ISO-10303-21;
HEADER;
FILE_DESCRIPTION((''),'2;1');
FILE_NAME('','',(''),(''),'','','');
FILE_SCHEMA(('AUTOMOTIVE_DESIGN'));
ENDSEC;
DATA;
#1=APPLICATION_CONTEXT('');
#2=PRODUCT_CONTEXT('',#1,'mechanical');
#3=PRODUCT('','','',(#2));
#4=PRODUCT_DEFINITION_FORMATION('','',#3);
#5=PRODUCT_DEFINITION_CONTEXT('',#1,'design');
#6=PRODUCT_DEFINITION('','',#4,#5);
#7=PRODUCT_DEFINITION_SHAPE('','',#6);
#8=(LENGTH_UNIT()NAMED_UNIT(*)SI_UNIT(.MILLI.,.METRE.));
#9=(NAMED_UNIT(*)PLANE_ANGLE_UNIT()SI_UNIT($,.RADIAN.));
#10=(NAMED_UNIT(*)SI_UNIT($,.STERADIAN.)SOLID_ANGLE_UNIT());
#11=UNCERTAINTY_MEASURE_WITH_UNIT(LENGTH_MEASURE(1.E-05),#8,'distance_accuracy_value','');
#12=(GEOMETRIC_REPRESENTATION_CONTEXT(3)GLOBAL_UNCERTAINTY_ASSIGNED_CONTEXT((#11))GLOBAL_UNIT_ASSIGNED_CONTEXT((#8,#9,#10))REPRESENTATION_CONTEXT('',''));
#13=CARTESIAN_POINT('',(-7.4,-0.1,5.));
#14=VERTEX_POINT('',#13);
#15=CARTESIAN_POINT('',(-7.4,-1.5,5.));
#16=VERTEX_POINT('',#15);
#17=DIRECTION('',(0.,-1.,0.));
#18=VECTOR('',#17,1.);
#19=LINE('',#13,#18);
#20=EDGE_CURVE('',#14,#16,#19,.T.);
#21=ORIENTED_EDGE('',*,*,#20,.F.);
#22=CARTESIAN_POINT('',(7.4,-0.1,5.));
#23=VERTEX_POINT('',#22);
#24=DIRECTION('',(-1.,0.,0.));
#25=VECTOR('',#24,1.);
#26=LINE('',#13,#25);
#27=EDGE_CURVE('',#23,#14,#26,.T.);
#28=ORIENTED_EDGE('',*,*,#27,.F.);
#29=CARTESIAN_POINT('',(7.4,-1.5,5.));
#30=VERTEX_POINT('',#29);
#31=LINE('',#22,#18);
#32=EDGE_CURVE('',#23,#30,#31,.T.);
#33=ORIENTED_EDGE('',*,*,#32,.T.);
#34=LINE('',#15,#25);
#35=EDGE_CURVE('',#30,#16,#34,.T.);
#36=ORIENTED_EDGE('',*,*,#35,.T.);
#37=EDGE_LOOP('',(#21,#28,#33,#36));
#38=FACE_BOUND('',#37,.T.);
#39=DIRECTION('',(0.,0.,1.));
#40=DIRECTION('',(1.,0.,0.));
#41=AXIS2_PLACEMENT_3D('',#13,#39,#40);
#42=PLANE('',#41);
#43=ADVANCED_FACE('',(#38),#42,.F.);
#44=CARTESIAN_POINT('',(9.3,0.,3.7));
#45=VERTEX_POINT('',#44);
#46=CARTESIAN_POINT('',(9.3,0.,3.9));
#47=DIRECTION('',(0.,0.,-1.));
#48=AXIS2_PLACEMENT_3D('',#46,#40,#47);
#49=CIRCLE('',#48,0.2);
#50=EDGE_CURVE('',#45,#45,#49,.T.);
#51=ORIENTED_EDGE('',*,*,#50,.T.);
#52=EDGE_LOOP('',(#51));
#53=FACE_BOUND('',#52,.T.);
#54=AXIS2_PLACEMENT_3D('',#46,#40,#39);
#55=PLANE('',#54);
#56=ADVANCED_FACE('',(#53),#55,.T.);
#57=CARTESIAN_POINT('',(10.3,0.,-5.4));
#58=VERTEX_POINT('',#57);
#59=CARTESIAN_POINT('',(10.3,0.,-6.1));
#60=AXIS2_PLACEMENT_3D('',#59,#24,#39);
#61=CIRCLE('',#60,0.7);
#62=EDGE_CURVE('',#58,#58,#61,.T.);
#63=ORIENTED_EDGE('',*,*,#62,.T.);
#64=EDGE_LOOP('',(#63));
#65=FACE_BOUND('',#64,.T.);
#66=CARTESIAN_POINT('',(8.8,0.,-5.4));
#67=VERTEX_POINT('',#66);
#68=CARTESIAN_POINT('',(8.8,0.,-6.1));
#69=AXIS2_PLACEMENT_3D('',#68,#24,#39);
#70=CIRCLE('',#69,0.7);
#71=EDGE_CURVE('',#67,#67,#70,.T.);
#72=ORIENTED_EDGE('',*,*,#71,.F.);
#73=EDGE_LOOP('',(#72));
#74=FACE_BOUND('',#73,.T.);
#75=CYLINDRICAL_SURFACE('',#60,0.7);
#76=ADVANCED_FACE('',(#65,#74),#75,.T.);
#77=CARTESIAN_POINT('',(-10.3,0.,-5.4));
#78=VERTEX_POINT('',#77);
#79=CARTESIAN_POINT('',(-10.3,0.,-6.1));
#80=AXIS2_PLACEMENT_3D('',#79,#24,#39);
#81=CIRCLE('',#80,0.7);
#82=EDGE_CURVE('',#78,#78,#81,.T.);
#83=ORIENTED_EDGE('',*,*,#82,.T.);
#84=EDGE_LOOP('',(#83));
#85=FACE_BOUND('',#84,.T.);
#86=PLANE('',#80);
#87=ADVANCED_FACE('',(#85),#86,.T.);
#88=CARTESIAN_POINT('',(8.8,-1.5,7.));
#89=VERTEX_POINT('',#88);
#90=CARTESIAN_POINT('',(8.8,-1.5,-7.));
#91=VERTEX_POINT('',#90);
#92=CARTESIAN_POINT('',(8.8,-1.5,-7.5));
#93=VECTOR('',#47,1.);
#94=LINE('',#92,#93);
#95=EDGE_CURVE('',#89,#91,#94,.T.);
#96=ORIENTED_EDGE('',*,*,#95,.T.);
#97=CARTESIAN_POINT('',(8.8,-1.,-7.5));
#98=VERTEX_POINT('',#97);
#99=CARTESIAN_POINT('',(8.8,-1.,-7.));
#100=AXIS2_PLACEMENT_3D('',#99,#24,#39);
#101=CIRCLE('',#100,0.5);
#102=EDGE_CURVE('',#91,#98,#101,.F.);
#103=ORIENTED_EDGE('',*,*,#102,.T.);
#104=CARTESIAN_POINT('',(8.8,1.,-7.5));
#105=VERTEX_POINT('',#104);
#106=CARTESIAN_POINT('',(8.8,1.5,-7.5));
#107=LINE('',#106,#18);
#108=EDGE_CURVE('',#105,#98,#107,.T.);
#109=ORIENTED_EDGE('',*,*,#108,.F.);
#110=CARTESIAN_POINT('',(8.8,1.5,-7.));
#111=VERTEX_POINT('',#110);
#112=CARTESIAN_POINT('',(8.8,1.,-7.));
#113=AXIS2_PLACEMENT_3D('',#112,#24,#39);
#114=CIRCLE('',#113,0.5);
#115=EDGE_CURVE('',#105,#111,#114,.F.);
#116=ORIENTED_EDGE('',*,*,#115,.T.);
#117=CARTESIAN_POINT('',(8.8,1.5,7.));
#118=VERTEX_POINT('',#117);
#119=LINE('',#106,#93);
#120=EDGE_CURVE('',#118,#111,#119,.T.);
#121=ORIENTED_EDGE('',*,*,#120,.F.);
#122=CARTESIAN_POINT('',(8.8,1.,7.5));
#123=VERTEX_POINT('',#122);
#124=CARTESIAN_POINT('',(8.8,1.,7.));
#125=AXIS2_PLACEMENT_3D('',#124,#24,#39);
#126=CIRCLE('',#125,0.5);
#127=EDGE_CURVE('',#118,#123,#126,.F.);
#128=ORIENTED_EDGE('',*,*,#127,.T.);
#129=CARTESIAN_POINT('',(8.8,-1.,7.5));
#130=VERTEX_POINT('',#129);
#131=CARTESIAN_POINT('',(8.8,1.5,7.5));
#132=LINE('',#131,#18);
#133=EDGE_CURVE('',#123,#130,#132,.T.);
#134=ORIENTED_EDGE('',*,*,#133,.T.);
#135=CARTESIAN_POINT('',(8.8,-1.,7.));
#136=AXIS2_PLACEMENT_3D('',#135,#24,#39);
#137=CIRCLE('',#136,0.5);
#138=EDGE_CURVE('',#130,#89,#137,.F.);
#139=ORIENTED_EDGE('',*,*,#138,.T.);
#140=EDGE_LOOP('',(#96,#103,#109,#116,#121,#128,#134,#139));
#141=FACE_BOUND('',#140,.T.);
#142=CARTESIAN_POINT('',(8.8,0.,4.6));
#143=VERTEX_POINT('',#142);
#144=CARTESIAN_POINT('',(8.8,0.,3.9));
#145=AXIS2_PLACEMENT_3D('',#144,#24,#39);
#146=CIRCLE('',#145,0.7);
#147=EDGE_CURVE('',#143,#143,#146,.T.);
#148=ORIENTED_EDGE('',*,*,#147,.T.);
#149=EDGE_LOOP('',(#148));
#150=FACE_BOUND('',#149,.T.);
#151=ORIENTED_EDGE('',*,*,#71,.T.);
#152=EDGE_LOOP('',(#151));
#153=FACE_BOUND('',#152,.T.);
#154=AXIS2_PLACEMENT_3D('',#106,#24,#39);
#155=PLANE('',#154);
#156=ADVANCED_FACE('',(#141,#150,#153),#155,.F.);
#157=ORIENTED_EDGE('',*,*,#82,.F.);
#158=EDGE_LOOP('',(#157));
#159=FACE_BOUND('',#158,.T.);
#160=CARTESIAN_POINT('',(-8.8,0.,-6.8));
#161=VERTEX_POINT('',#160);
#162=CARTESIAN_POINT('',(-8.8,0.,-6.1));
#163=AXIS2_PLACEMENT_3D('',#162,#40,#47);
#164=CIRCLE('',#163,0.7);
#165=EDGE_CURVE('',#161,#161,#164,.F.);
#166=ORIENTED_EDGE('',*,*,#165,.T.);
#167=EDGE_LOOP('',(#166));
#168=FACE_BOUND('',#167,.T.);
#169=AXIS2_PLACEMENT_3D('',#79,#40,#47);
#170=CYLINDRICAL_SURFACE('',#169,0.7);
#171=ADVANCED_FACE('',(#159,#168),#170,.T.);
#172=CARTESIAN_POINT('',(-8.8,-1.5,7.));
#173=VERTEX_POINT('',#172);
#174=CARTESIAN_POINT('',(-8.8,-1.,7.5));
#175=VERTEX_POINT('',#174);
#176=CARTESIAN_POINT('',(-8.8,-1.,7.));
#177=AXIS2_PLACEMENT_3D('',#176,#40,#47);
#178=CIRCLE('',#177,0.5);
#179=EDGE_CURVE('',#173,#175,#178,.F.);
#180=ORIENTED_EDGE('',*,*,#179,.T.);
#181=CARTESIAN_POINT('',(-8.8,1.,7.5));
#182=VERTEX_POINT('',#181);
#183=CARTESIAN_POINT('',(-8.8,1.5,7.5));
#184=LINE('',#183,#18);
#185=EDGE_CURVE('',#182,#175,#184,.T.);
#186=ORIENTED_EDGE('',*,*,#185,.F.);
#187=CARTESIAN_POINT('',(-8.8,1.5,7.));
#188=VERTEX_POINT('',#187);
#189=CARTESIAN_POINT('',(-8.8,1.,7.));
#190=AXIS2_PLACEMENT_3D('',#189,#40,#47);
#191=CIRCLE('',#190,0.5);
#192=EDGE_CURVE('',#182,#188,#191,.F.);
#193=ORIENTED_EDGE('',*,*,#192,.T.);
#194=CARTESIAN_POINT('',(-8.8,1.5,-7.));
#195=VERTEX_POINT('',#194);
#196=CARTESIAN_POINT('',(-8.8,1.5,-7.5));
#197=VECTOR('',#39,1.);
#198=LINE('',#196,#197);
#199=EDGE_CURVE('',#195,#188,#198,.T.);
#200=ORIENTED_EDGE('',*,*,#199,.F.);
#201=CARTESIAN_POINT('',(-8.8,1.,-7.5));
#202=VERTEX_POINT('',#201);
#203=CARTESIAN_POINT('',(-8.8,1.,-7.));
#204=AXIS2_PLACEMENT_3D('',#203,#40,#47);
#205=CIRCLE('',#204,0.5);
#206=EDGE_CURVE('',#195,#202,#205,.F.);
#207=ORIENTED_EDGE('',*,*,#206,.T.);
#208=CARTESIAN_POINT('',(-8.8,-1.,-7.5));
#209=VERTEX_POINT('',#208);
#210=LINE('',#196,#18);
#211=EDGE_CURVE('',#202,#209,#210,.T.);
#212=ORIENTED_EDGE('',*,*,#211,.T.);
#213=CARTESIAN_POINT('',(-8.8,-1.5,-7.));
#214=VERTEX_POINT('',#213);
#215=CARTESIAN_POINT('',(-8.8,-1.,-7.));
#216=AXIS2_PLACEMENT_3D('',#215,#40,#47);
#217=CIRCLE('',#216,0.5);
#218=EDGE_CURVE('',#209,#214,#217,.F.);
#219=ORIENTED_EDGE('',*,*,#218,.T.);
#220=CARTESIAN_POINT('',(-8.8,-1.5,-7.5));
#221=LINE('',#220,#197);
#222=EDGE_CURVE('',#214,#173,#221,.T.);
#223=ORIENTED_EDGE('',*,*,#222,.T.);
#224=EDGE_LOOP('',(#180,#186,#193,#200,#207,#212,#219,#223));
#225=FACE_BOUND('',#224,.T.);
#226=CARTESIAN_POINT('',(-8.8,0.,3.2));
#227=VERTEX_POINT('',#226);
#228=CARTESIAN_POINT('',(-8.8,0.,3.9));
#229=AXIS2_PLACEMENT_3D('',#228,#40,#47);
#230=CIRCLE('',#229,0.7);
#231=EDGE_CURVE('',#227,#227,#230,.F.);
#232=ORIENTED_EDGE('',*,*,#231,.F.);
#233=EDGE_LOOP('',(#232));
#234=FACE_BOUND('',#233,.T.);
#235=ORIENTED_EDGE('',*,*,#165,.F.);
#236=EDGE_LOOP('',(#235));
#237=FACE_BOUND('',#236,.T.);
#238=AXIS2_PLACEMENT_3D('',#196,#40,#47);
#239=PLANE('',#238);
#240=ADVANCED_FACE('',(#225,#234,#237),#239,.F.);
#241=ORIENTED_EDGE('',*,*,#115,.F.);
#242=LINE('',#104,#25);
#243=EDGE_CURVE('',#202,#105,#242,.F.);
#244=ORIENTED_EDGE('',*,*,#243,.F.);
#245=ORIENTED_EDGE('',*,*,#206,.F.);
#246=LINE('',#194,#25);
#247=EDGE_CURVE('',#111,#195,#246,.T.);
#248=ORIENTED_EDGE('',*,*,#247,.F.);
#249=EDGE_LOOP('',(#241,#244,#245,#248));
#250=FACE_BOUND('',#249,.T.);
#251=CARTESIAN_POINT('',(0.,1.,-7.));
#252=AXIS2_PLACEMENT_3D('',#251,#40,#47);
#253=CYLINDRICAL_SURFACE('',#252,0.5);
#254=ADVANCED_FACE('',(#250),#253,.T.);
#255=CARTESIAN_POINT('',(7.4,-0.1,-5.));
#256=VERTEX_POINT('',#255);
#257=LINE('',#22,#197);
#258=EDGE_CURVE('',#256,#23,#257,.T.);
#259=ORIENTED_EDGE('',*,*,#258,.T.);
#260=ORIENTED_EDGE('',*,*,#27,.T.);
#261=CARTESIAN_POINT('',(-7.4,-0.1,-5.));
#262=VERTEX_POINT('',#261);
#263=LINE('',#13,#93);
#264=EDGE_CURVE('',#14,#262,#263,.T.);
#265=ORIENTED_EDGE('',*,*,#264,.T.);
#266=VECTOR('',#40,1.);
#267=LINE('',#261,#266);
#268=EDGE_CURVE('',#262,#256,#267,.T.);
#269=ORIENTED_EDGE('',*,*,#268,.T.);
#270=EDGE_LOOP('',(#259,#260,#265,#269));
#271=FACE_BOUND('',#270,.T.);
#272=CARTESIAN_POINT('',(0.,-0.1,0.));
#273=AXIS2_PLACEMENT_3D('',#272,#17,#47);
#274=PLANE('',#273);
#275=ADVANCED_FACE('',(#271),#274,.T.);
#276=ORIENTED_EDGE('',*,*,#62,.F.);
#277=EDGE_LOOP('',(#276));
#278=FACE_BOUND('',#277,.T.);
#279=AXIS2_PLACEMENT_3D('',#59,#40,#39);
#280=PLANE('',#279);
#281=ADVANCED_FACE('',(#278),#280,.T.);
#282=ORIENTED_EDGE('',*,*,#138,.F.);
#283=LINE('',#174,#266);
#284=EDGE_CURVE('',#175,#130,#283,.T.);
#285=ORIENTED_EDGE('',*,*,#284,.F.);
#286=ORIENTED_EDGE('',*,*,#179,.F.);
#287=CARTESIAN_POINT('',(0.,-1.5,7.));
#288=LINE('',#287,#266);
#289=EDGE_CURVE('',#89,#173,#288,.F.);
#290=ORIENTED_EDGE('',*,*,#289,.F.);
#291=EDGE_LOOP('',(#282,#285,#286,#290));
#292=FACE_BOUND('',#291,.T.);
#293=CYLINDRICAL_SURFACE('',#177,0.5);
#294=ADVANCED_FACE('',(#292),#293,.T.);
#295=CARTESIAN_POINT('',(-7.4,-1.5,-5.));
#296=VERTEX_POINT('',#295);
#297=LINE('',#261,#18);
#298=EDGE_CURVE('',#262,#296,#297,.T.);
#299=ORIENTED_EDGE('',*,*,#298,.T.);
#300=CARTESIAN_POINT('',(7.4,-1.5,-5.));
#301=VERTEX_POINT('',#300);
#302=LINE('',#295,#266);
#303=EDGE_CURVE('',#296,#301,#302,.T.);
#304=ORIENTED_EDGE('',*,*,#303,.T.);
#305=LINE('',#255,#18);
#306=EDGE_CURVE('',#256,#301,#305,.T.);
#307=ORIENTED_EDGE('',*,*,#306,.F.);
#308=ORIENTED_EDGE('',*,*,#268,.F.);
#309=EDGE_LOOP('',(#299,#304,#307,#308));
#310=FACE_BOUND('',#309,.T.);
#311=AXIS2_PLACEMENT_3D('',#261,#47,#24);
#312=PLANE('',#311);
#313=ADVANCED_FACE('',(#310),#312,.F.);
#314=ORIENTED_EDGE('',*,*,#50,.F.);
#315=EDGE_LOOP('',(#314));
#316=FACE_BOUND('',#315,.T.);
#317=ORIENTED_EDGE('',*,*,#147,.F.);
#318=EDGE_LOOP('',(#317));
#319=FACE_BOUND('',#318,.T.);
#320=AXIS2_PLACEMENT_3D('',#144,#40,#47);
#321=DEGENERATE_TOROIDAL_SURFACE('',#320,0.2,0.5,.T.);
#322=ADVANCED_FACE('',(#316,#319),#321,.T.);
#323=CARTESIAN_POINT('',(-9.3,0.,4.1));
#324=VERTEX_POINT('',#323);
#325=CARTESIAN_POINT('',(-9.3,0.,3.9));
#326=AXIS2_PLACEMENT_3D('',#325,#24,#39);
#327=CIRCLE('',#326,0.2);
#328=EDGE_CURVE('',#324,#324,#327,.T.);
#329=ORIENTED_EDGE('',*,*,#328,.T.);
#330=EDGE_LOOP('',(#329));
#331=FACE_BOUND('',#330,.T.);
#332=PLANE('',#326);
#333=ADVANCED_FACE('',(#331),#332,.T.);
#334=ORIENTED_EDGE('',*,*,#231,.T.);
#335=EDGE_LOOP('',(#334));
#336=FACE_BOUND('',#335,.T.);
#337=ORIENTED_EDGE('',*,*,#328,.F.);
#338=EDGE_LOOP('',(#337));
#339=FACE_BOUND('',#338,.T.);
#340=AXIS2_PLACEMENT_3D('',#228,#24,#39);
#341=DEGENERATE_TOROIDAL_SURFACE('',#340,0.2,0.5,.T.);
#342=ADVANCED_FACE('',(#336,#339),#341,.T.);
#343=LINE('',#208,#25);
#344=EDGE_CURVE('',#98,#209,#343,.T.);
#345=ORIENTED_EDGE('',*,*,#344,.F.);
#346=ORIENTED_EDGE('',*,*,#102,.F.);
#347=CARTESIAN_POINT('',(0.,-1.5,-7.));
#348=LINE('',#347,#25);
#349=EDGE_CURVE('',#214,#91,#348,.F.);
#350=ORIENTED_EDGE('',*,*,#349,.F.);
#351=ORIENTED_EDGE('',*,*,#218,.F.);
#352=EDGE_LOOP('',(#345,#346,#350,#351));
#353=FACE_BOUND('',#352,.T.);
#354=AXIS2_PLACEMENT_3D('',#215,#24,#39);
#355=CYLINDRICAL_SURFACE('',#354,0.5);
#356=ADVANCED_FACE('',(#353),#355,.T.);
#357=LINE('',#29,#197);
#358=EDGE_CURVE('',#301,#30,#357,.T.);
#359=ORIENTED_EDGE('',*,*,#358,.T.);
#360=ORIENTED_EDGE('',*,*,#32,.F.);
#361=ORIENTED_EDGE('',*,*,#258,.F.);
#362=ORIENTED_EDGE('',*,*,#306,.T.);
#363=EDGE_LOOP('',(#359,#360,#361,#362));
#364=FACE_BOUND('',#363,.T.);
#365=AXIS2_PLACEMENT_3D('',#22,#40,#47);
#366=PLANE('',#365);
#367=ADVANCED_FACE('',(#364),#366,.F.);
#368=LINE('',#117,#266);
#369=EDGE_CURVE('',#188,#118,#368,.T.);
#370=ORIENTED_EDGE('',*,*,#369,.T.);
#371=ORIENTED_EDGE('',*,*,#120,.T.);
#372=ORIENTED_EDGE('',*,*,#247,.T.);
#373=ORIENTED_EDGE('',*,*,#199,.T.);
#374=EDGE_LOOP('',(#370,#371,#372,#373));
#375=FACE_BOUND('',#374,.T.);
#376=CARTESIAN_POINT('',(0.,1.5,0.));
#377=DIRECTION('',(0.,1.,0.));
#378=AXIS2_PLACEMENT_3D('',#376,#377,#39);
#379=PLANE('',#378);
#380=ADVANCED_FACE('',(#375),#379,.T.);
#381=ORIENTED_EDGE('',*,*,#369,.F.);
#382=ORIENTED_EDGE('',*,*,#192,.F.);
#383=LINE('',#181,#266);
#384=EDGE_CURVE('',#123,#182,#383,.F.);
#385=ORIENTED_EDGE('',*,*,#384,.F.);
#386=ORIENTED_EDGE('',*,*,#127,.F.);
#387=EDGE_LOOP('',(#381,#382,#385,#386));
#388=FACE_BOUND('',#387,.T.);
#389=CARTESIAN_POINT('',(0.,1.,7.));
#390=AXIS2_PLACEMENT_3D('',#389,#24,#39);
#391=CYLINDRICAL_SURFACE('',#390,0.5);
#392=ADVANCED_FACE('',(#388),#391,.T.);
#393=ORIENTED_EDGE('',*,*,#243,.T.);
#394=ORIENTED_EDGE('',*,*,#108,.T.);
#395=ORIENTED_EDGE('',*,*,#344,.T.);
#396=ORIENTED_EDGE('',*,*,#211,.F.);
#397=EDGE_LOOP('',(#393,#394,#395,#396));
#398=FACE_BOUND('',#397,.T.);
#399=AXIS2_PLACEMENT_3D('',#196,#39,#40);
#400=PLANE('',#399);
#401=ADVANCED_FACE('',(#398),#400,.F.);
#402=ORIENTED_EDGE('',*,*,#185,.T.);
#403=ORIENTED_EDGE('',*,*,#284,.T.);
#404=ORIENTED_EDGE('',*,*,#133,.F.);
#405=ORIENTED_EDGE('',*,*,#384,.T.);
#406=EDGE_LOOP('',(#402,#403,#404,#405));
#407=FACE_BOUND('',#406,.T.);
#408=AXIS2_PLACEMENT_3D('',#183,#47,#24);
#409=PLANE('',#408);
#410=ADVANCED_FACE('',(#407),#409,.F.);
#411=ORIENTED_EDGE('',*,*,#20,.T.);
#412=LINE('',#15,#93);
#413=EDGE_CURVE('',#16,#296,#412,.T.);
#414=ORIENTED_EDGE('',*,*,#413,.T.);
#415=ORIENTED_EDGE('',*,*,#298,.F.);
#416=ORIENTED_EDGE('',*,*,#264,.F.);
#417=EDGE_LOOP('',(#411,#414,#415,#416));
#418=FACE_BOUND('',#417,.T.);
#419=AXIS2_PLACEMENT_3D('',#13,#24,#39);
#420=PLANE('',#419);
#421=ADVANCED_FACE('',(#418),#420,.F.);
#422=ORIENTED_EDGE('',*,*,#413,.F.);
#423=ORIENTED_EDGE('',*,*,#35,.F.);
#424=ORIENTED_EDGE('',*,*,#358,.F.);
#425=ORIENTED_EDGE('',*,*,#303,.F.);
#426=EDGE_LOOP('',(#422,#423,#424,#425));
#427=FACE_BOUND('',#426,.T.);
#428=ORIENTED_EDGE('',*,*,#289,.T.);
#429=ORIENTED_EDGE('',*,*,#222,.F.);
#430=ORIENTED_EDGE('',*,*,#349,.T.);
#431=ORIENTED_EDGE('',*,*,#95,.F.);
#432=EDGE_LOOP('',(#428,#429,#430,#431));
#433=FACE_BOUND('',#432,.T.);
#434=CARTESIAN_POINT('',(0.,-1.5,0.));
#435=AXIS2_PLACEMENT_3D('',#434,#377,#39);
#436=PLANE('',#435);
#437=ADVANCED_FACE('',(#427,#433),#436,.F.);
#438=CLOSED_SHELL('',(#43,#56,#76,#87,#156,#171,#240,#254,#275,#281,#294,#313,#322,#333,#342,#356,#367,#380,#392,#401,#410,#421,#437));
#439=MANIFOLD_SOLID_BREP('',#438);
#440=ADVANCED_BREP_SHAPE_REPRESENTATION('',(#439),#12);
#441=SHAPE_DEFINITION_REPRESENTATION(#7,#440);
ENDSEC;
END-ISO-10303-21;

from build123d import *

# Parameters (mm, degrees)
SKETCH1_W            = 17.6
SKETCH1_H            = 15
BOSS_EXTRUDE1_DEPTH  = 1.5
SKETCH2_W            = 14.8
SKETCH2_H            = 10
CUT_EXTRUDE1_DEPTH   = 1.4
SKETCH3_R            = 0.7
BOSS_EXTRUDE2_DEPTH  = 1.5
SKETCH4_R            = 0.7
BOSS_EXTRUDE3_DEPTH  = 0.5
FILLET2_R            = 0.5
FILLET2_OF_MIRROR1_R = 0.5
FILLET1_R            = 0.5


with BuildPart() as part:
    # Sketch1 → Boss-Extrude1 (new, symmetric)
    with BuildSketch(Plane(origin=(0, 0, 0), x_dir=(1, 0, 0), z_dir=(0, 1, 0))):
        Rectangle(SKETCH1_W, SKETCH1_H)
    extrude(amount=BOSS_EXTRUDE1_DEPTH, both=True)

    # Sketch2 → Cut-Extrude1 (cut)
    with BuildSketch(Plane.XZ.offset(1.5)):
        Rectangle(SKETCH2_W, SKETCH2_H)
    extrude(amount=-CUT_EXTRUDE1_DEPTH, mode=Mode.SUBTRACT)

    # Sketch3 → Boss-Extrude2 (add)
    with BuildSketch(Plane.ZY.offset(8.8)):
        with Locations(Location((-6.1, 0, 0), (0, 0, 180))):
            Circle(SKETCH3_R)
    boss_extrude2 = extrude(amount=BOSS_EXTRUDE2_DEPTH)

    # Sketch4 → Boss-Extrude3 (add)
    with BuildSketch(Plane.ZY.offset(8.8)):
        with Locations(Location((3.9, 0, 0), (0, 0, 180))):
            Circle(SKETCH4_R)
    boss_extrude3 = extrude(amount=BOSS_EXTRUDE3_DEPTH)

    # Fillet2
    fillet2_edges = [part.edges().sort_by_distance(p)[0] for p in [
        (-9.3, 0, 4.6),
    ]]
    fillet(fillet2_edges, radius=FILLET2_R - 0.0001)  # a hair under: the kernel refuses the full size

    # Mirror1: Boss-Extrude2, Boss-Extrude3 across plane
    add(boss_extrude2.mirror(Plane(origin=(0, 0, 0), x_dir=(0, 0, 1), z_dir=(1, 0, 0))))
    add(boss_extrude3.mirror(Plane(origin=(0, 0, 0), x_dir=(0, 0, 1), z_dir=(1, 0, 0))))

    # Fillet2 of Mirror1
    fillet2_of_mirror1_edges = [part.edges().sort_by_distance(p)[0] for p in [
        (9.3, 0, 4.6),
    ]]
    fillet(fillet2_of_mirror1_edges, radius=FILLET2_OF_MIRROR1_R - 0.0001)  # a hair under: the kernel refuses the full size

    # Fillet1
    fillet1_edges = [part.edges().sort_by_distance(p)[0] for p in [
        (0, 1.5, 7.5),
        (0, -1.5, 7.5),
        (0, -1.5, -7.5),
        (0, 1.5, -7.5),
    ]]
    fillet(fillet1_edges, radius=FILLET1_R)


solid = part.part
